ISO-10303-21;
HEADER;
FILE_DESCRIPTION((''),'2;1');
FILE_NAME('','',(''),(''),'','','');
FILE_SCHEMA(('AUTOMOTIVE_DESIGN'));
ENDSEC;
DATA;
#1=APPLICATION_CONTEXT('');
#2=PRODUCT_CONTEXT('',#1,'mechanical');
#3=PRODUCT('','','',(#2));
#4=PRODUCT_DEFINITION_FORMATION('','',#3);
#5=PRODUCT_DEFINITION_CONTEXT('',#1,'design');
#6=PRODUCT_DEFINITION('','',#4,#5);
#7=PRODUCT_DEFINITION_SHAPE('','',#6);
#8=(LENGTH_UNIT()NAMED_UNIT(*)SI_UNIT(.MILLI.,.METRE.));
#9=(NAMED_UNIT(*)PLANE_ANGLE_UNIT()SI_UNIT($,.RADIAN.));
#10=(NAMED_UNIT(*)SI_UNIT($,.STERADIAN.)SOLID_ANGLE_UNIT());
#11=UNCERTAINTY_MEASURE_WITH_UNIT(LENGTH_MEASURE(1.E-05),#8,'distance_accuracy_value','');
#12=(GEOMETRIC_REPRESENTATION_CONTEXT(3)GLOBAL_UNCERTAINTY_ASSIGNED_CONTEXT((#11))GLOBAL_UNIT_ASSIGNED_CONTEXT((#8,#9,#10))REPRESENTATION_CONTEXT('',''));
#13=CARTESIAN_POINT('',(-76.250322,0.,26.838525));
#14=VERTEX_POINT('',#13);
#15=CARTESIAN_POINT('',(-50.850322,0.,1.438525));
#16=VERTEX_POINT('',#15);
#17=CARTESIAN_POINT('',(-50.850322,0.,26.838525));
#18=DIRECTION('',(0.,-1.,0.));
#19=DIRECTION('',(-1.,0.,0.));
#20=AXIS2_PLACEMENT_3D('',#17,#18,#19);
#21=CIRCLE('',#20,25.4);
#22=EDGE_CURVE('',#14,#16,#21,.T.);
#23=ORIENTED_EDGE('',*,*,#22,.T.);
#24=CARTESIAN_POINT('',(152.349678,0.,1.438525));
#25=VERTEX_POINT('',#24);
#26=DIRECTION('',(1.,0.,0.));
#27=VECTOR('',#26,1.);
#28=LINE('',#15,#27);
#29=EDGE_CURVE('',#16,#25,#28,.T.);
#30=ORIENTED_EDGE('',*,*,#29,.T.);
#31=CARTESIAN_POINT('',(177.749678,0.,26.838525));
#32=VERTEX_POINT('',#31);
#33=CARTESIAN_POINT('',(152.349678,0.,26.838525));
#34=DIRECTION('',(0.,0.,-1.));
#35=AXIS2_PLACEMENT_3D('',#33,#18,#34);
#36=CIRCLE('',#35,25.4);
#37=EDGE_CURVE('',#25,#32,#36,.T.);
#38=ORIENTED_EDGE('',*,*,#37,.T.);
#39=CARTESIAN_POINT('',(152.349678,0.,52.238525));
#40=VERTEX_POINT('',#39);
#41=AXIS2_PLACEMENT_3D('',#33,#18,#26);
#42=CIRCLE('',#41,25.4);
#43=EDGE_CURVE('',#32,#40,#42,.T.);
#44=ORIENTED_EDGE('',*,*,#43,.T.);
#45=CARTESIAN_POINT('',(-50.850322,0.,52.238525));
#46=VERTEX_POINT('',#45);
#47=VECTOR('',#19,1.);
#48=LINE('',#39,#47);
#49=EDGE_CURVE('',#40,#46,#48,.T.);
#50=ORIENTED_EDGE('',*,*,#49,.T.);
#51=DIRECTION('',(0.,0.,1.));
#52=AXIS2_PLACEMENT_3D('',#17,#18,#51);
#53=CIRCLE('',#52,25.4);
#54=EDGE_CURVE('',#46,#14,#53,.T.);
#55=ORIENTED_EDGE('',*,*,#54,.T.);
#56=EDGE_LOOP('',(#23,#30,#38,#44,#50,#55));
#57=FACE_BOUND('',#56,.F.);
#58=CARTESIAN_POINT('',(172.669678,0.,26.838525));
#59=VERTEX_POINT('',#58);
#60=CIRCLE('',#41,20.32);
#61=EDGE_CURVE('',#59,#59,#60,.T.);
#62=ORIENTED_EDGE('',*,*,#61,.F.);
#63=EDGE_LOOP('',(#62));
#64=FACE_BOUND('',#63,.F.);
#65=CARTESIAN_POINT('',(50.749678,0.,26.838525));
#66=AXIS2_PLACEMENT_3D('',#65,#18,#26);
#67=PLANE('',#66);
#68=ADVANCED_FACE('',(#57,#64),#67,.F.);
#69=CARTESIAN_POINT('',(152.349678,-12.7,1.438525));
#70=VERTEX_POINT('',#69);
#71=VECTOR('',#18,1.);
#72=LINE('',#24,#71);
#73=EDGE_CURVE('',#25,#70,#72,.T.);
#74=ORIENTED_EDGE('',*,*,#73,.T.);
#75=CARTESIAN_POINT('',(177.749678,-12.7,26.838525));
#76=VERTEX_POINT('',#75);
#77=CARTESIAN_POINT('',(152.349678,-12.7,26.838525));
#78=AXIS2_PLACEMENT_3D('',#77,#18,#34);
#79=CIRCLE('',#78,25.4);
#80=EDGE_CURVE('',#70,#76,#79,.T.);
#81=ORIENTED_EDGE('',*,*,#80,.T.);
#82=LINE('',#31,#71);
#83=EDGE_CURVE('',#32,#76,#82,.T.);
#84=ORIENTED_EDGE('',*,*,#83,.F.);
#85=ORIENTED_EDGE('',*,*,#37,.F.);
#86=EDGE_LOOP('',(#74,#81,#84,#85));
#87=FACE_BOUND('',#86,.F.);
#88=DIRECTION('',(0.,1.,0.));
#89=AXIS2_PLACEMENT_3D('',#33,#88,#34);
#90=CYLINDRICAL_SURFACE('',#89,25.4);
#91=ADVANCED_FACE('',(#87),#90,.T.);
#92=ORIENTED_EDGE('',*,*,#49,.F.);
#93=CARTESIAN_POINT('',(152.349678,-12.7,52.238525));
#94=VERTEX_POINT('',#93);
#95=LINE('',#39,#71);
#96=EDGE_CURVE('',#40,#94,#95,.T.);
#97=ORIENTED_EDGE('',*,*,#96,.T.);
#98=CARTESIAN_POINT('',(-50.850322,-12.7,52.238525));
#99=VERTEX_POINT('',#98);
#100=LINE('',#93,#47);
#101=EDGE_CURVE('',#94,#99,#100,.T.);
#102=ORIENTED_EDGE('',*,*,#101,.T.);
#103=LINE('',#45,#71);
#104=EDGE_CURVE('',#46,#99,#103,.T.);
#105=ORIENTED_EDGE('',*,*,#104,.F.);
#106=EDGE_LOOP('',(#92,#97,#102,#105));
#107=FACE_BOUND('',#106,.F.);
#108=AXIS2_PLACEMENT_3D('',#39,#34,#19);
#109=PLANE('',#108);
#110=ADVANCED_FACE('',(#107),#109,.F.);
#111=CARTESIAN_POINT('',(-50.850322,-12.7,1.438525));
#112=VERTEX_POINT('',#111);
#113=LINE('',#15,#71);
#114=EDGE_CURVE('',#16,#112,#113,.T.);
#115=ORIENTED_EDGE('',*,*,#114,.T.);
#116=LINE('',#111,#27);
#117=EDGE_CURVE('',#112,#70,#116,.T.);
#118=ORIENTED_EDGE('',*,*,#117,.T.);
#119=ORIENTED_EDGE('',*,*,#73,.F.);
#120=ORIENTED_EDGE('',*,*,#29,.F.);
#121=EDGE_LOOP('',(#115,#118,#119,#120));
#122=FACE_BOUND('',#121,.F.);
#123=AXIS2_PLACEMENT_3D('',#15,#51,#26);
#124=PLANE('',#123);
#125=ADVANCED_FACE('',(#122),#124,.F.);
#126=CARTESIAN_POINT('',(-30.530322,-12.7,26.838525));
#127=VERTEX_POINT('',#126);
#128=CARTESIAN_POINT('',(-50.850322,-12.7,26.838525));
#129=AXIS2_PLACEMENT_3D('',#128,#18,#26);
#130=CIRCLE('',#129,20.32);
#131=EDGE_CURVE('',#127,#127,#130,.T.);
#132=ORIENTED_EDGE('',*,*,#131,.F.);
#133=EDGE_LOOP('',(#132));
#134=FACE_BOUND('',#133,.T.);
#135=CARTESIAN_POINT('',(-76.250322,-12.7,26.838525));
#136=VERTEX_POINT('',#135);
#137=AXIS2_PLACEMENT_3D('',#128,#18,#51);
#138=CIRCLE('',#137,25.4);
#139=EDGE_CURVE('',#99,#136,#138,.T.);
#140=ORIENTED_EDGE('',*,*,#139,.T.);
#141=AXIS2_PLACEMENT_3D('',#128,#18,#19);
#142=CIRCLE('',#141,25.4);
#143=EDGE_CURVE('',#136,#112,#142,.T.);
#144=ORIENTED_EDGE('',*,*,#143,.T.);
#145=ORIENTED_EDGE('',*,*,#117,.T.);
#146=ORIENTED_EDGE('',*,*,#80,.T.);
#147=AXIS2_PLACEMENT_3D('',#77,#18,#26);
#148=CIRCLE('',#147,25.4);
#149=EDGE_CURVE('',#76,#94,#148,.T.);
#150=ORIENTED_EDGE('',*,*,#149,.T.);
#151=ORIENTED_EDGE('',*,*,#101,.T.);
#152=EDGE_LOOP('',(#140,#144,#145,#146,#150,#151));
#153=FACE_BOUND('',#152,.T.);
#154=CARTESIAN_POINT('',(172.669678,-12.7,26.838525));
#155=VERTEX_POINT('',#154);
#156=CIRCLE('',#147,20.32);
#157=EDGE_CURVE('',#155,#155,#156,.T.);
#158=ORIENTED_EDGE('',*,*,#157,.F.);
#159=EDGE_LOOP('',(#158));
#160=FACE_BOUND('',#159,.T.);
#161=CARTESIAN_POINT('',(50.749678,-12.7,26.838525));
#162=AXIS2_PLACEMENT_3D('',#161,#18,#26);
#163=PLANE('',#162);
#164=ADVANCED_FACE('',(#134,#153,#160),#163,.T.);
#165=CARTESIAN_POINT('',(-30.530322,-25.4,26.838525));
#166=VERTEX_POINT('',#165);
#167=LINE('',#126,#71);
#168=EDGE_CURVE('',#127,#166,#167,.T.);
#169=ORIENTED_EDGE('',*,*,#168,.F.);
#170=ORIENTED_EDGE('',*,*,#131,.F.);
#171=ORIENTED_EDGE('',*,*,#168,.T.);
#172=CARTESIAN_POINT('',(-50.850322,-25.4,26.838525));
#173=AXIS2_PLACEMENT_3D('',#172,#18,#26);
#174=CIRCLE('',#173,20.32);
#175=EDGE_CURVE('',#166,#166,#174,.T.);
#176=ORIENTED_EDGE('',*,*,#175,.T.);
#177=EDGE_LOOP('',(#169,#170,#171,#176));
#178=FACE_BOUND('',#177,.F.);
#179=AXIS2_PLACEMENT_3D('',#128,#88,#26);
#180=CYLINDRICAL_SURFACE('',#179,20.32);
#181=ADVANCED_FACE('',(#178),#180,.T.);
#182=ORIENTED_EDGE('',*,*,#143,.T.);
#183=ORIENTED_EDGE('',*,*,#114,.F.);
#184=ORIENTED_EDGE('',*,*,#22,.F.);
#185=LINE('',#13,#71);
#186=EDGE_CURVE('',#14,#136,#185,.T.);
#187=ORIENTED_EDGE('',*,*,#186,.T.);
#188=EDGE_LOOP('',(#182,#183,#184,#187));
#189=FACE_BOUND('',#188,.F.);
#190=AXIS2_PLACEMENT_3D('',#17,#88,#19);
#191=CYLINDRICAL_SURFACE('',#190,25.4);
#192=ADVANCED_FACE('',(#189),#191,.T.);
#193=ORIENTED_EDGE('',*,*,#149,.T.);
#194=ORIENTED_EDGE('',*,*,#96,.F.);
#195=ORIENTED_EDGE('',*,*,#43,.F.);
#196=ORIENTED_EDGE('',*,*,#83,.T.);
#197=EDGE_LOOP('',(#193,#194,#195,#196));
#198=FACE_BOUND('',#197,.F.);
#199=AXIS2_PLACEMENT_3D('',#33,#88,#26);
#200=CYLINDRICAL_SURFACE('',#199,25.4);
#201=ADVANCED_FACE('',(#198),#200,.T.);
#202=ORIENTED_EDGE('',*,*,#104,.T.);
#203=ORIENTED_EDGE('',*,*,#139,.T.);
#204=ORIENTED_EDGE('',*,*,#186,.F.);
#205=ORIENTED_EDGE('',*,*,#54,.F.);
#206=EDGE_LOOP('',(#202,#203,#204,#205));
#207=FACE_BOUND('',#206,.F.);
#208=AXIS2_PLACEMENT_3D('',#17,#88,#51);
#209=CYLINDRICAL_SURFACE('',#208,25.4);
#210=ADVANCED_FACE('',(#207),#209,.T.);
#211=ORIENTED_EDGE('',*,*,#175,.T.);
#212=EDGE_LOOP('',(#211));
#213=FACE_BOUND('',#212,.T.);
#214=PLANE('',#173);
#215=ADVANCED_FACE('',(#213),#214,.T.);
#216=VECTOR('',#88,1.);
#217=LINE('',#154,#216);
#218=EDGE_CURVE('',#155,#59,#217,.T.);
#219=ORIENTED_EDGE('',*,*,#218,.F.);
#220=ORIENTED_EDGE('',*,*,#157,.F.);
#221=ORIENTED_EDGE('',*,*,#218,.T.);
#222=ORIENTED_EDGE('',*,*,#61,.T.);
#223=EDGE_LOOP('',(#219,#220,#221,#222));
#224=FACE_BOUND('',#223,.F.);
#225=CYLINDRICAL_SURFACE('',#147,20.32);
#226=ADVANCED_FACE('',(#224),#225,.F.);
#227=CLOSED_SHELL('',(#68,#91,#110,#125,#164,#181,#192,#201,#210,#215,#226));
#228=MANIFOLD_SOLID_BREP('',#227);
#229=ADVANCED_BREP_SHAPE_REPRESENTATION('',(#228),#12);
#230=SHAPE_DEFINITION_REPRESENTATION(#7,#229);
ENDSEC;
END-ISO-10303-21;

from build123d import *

# Parameters (mm, degrees)
F2_DEPTH = 12.7
F3_R     = 20.32
F4_DEPTH = 12.7
F5_DEPTH = 12.7


# Not quite as in the source:
# - a variable given as a bare number and used for a length is read in inches; the dataset says mm whatever the document's units were


with BuildPart() as f2:
    # F1 (on Front) → F2 (new body)
    with BuildSketch(Plane.XZ):
        with BuildLine():
            Line((152.3496784632, 52.2385248174), (-50.8503215368, 52.2385248174))
            ThreePointArc((-50.8503215368, 52.2385248174), (-68.8108337789, 44.7990370595), (-76.2503215368, 26.8385248174))
            ThreePointArc((-76.2503215368, 26.8385248174), (-68.8108337789, 8.8780125752), (-50.8503215368, 1.4385248174))
            Line((-50.8503215368, 1.4385248174), (152.3496784632, 1.4385248174))
            ThreePointArc((152.3496784632, 1.4385248174), (170.3101907054, 8.8780125752), (177.7496784632, 26.8385248174))
            ThreePointArc((177.7496784632, 26.8385248174), (170.3101907054, 44.7990370595), (152.3496784632, 52.2385248174))
        make_face()
    extrude(amount=F2_DEPTH)

    # F3 (on face) → F4 (join)
    with BuildSketch(Plane.XZ.offset(12.7)):
        with Locations((-50.8503215368, 26.8385248174)):
            Circle(F3_R)
    extrude(amount=F4_DEPTH)

    # F3 (on face) → F5 (cut)
    with BuildSketch(Plane.XZ.offset(12.7)):
        with Locations((152.3496784632, 26.8385248174)):
            Circle(F3_R)
    extrude(amount=-F5_DEPTH, mode=Mode.SUBTRACT)


solid = f2.part
